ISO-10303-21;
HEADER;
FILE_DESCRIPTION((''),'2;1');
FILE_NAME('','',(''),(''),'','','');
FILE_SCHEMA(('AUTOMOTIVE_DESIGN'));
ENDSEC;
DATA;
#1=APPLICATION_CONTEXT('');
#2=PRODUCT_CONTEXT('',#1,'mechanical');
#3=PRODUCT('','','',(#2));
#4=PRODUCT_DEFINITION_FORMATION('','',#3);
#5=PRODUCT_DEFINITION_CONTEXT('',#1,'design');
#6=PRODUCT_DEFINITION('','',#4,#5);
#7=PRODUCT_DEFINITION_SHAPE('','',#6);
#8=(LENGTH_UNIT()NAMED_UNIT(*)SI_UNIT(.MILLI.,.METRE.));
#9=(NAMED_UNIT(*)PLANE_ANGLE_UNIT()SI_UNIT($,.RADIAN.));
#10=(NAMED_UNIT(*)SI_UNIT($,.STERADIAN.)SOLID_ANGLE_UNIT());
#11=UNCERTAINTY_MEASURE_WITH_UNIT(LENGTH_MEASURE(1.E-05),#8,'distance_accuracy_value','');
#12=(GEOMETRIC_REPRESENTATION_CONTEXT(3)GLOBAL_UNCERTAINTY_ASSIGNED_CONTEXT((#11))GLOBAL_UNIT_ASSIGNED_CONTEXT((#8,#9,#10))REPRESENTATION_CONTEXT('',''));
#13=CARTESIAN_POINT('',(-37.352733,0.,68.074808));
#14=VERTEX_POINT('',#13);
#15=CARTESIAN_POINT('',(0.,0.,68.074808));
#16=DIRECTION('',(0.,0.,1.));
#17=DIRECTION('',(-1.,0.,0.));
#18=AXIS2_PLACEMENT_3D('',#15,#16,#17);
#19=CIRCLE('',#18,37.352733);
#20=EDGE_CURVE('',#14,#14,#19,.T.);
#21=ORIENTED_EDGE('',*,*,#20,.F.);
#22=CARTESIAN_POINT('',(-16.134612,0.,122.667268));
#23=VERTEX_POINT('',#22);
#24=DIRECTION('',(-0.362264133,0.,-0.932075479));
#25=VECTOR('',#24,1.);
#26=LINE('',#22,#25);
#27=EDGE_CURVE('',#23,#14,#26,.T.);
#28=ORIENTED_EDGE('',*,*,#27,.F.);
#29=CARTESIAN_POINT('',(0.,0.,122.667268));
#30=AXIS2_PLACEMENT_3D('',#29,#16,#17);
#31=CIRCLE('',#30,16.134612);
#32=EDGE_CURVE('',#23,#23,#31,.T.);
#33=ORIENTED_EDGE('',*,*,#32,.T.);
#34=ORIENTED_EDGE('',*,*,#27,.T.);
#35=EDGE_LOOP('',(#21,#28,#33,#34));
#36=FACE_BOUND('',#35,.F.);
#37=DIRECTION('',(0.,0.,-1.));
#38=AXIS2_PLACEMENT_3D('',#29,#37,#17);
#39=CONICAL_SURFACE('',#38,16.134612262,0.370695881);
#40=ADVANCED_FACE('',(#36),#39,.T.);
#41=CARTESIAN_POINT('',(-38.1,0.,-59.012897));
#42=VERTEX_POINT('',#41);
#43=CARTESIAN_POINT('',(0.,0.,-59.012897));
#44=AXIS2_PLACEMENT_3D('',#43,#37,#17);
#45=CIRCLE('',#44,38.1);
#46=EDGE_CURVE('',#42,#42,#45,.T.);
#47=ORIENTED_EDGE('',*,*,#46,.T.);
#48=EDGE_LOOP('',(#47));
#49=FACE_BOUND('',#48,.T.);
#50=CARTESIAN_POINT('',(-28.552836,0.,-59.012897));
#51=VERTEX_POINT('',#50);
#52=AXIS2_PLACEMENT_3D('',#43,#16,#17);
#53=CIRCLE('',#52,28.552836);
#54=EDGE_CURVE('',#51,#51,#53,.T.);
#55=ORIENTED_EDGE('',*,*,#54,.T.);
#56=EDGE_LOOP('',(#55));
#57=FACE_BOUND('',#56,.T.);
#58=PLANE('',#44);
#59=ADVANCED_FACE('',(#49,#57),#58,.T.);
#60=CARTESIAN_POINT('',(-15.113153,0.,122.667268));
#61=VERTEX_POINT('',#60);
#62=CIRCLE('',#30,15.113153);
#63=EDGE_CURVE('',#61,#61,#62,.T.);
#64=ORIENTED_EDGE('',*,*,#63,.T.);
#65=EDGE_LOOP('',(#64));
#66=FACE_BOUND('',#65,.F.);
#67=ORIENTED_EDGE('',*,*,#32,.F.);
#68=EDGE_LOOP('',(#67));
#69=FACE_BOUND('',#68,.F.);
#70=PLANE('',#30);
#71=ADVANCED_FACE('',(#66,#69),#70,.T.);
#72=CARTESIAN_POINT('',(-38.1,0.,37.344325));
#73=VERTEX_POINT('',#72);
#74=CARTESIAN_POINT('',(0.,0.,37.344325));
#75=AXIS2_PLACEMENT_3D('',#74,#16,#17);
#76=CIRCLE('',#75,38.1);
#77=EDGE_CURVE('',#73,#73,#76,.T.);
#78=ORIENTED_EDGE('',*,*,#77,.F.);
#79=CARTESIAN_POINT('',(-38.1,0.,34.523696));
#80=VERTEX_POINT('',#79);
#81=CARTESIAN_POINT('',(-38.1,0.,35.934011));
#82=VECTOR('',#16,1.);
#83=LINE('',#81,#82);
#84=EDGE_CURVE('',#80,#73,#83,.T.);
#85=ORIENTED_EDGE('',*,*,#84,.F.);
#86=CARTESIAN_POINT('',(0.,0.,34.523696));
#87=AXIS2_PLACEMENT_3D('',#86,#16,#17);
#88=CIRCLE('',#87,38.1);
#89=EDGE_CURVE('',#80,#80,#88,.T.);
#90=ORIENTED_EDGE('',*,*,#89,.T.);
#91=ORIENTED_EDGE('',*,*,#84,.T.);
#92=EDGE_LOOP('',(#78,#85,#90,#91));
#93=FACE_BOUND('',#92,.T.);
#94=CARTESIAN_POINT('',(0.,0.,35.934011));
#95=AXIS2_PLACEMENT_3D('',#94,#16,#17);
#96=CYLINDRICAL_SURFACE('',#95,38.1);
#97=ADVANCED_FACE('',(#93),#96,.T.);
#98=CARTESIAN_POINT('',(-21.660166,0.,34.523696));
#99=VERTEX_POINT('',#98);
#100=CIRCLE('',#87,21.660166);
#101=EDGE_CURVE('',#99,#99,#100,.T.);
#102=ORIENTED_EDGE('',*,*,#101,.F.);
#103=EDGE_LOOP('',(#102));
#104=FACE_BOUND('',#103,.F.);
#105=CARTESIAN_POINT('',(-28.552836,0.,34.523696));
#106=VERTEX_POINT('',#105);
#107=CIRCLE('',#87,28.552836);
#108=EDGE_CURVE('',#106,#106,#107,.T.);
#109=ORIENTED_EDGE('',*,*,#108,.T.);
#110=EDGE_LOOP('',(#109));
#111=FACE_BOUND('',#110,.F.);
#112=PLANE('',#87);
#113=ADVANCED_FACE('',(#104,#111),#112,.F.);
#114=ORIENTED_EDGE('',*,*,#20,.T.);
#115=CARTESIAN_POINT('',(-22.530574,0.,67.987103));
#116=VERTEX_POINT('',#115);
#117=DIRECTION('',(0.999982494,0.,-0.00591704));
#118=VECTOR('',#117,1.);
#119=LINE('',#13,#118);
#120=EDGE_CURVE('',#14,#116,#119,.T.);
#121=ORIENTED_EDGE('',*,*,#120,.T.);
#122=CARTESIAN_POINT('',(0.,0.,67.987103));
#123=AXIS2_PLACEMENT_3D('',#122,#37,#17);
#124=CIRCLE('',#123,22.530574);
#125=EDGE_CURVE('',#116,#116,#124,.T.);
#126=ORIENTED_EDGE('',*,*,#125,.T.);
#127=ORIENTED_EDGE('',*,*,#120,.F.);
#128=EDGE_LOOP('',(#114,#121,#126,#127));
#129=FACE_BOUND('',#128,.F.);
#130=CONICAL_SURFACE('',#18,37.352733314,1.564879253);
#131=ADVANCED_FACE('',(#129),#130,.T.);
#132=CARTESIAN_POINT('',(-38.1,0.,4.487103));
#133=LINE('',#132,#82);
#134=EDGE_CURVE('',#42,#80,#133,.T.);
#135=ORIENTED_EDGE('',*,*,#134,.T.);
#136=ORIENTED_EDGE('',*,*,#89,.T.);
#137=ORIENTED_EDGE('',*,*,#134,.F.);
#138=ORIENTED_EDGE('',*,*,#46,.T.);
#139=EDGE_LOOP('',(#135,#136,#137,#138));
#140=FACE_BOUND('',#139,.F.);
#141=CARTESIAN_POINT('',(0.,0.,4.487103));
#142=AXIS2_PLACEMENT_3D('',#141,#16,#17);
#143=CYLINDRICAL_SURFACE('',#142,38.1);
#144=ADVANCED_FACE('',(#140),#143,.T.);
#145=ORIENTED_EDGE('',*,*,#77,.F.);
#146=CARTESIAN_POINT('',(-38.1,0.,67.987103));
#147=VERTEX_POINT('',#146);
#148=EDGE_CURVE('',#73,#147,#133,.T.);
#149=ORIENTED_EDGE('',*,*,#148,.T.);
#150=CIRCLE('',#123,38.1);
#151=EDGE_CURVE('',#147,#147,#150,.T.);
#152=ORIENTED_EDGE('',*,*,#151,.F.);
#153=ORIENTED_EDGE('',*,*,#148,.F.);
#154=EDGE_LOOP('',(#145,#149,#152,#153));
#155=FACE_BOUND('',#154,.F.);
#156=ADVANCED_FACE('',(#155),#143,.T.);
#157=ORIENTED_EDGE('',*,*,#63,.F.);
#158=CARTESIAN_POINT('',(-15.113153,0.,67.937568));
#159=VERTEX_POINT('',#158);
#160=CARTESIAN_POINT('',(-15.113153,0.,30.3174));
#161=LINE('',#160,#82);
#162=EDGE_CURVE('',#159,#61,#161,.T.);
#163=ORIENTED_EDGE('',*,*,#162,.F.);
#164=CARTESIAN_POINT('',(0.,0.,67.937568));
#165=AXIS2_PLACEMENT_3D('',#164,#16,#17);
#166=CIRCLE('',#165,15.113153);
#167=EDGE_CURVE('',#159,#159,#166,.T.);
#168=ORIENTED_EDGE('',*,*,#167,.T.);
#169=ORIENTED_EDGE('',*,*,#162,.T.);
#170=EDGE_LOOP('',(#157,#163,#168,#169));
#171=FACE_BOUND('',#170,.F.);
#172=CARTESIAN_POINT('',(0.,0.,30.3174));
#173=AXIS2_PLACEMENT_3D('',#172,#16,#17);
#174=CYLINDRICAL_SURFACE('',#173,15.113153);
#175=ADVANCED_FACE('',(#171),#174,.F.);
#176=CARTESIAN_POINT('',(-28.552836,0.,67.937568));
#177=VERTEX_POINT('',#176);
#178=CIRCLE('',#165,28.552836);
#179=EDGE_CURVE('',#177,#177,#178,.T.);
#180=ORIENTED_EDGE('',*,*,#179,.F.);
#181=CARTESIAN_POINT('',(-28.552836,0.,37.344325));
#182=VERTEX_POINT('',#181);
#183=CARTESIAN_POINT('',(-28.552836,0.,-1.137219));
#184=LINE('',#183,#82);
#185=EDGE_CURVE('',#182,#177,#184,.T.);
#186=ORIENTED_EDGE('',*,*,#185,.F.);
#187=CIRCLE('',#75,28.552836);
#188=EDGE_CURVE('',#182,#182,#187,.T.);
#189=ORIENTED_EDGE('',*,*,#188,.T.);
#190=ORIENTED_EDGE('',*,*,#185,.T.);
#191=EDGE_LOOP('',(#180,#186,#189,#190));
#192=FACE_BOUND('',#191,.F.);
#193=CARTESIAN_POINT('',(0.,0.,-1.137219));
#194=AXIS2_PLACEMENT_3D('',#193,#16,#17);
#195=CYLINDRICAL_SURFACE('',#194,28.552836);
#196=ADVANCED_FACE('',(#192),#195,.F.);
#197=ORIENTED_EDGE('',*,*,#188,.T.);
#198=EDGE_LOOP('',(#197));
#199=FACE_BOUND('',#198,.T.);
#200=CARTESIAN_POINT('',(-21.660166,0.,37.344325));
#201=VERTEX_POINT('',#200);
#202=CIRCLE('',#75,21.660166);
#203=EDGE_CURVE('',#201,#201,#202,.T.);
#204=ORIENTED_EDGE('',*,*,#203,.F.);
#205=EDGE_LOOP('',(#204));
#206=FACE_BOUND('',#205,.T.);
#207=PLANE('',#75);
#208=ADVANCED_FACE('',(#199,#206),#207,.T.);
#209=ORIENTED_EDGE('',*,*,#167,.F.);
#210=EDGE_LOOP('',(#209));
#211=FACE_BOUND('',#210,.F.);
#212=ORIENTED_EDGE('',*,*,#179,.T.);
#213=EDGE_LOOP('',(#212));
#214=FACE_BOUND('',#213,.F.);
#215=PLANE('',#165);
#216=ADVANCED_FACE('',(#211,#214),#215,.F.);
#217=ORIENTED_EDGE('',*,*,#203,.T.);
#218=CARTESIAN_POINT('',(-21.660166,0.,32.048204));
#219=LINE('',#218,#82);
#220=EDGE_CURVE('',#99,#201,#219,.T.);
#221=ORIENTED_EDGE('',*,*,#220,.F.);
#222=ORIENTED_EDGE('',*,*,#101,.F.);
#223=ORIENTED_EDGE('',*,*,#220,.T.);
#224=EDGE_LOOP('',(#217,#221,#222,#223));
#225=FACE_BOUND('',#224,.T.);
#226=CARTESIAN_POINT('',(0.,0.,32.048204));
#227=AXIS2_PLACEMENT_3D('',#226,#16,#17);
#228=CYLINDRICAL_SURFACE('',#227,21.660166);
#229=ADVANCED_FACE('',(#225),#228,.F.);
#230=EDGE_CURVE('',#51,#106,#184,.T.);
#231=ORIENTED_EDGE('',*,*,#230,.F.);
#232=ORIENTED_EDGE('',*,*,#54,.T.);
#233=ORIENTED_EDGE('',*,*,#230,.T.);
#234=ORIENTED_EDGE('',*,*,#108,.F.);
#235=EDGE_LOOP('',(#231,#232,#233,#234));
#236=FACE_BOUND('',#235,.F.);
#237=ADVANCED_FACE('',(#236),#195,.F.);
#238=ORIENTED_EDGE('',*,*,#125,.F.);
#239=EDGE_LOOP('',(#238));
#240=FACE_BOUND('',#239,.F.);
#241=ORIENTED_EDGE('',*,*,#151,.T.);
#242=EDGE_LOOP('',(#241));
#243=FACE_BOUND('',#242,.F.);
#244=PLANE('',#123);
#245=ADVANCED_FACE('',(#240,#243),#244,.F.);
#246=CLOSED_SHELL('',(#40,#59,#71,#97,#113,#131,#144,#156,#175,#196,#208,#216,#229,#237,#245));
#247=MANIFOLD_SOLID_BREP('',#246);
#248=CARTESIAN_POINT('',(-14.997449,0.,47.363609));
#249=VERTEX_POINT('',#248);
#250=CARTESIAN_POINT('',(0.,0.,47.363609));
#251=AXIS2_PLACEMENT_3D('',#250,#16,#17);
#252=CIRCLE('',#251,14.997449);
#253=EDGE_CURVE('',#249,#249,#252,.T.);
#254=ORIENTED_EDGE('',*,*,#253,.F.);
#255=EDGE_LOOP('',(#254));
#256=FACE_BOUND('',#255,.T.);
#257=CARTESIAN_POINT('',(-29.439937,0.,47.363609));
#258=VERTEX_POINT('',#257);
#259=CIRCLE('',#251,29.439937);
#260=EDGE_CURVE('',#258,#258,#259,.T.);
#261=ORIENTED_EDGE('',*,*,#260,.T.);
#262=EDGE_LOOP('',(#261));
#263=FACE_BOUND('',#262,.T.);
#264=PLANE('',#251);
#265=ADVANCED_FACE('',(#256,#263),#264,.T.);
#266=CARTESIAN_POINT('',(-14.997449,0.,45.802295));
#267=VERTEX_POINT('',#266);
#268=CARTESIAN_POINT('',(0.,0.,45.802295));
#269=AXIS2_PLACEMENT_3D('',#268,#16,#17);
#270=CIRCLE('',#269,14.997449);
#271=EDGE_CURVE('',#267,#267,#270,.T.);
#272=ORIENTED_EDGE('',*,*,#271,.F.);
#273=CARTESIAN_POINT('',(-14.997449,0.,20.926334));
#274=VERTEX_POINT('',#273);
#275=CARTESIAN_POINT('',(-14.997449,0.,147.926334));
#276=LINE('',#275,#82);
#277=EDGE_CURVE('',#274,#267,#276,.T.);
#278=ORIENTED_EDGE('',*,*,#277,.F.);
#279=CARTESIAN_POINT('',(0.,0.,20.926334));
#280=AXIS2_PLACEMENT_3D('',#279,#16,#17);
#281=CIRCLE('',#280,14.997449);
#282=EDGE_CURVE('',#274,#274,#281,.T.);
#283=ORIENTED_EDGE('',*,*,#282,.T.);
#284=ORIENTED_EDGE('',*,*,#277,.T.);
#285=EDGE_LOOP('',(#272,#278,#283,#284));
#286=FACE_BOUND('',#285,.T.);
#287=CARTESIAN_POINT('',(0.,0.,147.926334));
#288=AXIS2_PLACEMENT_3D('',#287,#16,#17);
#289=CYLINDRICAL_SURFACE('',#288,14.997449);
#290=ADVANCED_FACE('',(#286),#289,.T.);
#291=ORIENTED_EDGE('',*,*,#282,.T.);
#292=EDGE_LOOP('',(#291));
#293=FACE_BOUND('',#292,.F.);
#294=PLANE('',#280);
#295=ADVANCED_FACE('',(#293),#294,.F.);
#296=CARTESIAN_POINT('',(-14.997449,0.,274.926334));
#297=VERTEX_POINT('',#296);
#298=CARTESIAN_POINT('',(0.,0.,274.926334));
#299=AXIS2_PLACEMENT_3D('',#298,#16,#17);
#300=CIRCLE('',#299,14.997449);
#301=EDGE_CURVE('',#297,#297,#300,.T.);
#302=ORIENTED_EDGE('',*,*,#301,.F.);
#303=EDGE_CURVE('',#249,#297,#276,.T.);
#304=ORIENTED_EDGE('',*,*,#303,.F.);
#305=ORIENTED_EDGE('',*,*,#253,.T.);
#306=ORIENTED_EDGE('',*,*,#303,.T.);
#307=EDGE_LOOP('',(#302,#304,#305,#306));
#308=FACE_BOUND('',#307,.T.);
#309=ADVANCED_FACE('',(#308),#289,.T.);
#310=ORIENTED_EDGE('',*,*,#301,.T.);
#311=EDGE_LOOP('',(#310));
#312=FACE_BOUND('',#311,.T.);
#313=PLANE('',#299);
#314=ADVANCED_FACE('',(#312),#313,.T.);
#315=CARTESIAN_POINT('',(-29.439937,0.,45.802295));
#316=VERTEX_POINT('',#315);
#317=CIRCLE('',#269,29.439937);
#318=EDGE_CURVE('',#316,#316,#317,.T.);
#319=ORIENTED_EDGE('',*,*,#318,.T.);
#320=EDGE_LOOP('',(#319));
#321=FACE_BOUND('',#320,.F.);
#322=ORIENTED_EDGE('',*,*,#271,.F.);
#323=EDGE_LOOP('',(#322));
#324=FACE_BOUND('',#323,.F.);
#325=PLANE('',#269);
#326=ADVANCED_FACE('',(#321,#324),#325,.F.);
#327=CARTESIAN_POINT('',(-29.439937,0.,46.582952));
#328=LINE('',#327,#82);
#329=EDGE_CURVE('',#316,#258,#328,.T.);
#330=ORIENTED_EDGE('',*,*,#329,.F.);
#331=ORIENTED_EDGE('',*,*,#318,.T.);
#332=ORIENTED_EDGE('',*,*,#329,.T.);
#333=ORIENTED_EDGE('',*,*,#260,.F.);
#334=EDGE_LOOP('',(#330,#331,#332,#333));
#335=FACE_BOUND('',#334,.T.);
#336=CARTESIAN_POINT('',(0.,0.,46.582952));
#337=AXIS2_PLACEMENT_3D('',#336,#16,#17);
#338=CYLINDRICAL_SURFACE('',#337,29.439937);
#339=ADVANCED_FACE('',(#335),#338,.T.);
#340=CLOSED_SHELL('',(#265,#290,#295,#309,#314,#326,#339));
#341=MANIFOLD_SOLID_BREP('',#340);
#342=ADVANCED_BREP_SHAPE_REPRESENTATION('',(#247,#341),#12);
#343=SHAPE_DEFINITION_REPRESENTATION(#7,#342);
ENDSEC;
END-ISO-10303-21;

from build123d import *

# Parameters (mm, degrees)
F0_W  = 38.1
F0_H  = 127
F4_W  = 15.1131534949
F4_H  = 210.3794142604
F6_W  = 28.5528358072
F6_H  = 138.149574399
F8_W  = 14.9974487722
F8_H  = 254
F12_W = 29.4399373233
F12_H = 1.5613138676
F14_W = 38.1
F14_H = 2.8206296265
F16_W = 21.6601658612
F16_H = 20.3340332955


# Not quite as in the source:
# - a feature of the source that left no trace in its solid (it failed there, or was rolled back) is left out


with BuildPart() as f1:
    # F0 (on Front) → F1 (revolve)
    with BuildSketch(Plane.XZ):
        with Locations((-19.05, 4.4871026874)):
            Rectangle(F0_W, F0_H)
    revolve(axis=Axis((0, 0, 4.4871026874), (0, 0, -1)))

    # F2 (on Front) → F3 (revolve)
    with BuildSketch(Plane.XZ):
        Polygon((-37.352733314, 68.0748075247), (0, 67.8537860513), (0, 122.6672679186), (-16.1346122622, 122.6672679186), align=None)
    revolve(axis=Axis((0, 0, 95.2605269849), (0, 0, 1)))

    # F4 (on Front) → F5 (revolve, cut)
    with BuildSketch(Plane.XZ):
        with Locations((-7.5565767474, 30.3173996508)):
            Rectangle(F4_W, F4_H)
    revolve(axis=Axis((0, 0, 30.3173996508), (0, 0, 1)), mode=Mode.SUBTRACT)

    # F6 (on Front) → F7 (revolve, cut)
    with BuildSketch(Plane.XZ):
        with Locations((-14.2764179036, -1.1372193694)):
            Rectangle(F6_W, F6_H)
    revolve(axis=Axis((0, 0, -1.1372193694), (0, 0, 1)), mode=Mode.SUBTRACT)

    # F14 (on Front) → F15 (revolve)
    with BuildSketch(Plane.XZ):
        with Locations((-19.05, 35.9340105206)):
            Rectangle(F14_W, F14_H)
    revolve(axis=Axis((0, 0, 35.9340105206), (0, 0, 1)))

    # F16 (on Front) → F17 (revolve, cut)
    with BuildSketch(Plane.XZ):
        with Locations((-10.8300829306, 32.0482039824)):
            Rectangle(F16_W, F16_H)
    revolve(axis=Axis((0, 0, 32.0482039824), (0, 0, -1)), mode=Mode.SUBTRACT)


with BuildPart() as f9:
    # F8 (on Front) → F9 (revolve)
    with BuildSketch(Plane.XZ):
        with Locations((-7.4987243861, 147.9263339639)):
            Rectangle(F8_W, F8_H)
    revolve(axis=Axis((0, 0, 147.9263339639), (0, 0, 1)))

    # F12 (on Front) → F13 (revolve)
    with BuildSketch(Plane.XZ):
        with Locations((-14.7199686617, 46.5829521418)):
            Rectangle(F12_W, F12_H)
    revolve(axis=Axis((0, 0, 46.5829521418), (0, 0, 1)))


solid = Compound([f1.part, f9.part])
